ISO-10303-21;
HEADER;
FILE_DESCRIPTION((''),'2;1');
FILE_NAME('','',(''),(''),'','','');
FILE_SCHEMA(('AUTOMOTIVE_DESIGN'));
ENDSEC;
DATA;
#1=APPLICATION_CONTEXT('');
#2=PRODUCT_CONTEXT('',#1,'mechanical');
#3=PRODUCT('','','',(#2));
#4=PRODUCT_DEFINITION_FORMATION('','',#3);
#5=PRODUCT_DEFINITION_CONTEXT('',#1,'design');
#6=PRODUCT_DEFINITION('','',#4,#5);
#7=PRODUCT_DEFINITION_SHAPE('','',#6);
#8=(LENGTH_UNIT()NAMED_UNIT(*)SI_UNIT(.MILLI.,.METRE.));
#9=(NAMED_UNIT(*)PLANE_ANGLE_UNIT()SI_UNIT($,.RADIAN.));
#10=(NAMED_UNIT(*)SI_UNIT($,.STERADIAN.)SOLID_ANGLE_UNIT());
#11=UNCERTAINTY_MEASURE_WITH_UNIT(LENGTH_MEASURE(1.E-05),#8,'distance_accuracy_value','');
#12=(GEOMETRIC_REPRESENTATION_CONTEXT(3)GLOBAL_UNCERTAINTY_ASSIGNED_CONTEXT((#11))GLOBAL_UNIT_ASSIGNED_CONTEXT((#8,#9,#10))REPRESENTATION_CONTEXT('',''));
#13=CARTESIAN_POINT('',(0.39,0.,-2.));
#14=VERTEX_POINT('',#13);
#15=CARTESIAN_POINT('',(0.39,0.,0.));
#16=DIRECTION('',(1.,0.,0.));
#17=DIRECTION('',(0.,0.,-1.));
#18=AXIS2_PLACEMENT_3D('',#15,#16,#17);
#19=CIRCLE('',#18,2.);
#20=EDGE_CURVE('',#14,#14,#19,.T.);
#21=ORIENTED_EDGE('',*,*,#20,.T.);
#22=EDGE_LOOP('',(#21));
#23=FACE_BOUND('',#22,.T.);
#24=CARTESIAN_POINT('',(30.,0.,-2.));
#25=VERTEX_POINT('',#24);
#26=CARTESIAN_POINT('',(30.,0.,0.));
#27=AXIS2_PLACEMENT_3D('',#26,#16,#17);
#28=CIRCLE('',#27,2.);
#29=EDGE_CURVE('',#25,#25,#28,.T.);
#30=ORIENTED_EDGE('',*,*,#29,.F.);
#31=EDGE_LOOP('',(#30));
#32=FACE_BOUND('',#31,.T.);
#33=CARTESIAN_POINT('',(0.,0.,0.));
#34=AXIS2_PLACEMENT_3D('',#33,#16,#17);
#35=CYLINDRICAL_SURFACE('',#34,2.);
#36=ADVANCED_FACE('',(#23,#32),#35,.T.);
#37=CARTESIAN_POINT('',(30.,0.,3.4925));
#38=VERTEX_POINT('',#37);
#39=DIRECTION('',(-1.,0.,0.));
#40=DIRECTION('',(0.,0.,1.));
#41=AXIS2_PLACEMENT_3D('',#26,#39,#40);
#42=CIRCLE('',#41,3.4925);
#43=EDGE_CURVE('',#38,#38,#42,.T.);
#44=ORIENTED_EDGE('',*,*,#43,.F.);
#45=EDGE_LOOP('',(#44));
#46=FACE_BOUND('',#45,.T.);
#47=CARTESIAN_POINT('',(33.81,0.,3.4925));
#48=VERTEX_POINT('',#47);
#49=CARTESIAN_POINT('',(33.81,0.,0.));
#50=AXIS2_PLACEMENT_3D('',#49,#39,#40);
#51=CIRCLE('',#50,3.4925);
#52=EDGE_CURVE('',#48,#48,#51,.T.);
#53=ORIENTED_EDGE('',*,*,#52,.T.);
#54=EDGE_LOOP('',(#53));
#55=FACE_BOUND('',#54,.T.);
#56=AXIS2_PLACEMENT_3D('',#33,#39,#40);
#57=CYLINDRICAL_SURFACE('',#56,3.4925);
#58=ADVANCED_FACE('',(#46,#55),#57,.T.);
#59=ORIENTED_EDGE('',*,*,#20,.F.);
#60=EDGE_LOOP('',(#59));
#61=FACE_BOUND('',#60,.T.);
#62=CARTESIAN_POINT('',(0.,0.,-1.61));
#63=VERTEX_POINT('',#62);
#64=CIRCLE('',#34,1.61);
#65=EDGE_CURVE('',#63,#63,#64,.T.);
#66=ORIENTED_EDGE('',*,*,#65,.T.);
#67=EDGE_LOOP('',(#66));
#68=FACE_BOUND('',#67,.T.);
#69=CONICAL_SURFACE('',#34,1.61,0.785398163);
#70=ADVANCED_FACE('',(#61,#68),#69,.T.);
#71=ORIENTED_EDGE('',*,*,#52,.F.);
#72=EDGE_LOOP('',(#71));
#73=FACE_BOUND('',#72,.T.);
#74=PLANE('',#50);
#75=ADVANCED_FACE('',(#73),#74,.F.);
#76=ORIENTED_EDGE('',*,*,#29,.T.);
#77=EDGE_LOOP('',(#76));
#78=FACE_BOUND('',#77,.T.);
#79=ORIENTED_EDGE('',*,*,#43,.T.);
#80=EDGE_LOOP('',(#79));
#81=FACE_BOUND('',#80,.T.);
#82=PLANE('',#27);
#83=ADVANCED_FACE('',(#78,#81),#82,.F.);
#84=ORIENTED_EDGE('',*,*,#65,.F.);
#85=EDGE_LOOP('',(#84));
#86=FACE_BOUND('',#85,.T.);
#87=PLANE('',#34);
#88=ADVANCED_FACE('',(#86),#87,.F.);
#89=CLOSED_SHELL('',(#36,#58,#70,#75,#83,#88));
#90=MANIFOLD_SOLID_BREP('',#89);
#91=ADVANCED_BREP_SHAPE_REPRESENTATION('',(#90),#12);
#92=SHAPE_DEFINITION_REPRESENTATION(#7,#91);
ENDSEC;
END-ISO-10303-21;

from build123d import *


# Read off the part's stored shape, not the designer's step: M4x0.7 Machine Threads Stud1
with BuildPart() as part:
    # Sketch1 → Revolve1 (revolve)
    with BuildSketch(Plane(origin=(0, 0, 0), x_dir=(-1, 0, 0), z_dir=(0, 1, 0))):
        Polygon((0, 2.0066), (0, 0), (-33.809999944, 0), (-33.809999944, 3.4925), (-29.999999944, 3.4925), (-29.999999944, 2.0066), align=None)
    revolve(axis=Axis((0, 0, 0), (1, 0, 0)))

    # M4x0.7 Machine Threads Stud1 outline → M4x0.7 Machine Threads Stud1 (revolve, cut)
    with BuildSketch(Plane.YX):
        Polygon((1.61, 0), (2.0066, 0), (2.0066, 29.999999944), (2, 29.999999944), (2, 0.39), align=None)
    revolve(axis=Axis((0, 0, 0), (1, 0, 0)), mode=Mode.SUBTRACT)


solid = part.part
